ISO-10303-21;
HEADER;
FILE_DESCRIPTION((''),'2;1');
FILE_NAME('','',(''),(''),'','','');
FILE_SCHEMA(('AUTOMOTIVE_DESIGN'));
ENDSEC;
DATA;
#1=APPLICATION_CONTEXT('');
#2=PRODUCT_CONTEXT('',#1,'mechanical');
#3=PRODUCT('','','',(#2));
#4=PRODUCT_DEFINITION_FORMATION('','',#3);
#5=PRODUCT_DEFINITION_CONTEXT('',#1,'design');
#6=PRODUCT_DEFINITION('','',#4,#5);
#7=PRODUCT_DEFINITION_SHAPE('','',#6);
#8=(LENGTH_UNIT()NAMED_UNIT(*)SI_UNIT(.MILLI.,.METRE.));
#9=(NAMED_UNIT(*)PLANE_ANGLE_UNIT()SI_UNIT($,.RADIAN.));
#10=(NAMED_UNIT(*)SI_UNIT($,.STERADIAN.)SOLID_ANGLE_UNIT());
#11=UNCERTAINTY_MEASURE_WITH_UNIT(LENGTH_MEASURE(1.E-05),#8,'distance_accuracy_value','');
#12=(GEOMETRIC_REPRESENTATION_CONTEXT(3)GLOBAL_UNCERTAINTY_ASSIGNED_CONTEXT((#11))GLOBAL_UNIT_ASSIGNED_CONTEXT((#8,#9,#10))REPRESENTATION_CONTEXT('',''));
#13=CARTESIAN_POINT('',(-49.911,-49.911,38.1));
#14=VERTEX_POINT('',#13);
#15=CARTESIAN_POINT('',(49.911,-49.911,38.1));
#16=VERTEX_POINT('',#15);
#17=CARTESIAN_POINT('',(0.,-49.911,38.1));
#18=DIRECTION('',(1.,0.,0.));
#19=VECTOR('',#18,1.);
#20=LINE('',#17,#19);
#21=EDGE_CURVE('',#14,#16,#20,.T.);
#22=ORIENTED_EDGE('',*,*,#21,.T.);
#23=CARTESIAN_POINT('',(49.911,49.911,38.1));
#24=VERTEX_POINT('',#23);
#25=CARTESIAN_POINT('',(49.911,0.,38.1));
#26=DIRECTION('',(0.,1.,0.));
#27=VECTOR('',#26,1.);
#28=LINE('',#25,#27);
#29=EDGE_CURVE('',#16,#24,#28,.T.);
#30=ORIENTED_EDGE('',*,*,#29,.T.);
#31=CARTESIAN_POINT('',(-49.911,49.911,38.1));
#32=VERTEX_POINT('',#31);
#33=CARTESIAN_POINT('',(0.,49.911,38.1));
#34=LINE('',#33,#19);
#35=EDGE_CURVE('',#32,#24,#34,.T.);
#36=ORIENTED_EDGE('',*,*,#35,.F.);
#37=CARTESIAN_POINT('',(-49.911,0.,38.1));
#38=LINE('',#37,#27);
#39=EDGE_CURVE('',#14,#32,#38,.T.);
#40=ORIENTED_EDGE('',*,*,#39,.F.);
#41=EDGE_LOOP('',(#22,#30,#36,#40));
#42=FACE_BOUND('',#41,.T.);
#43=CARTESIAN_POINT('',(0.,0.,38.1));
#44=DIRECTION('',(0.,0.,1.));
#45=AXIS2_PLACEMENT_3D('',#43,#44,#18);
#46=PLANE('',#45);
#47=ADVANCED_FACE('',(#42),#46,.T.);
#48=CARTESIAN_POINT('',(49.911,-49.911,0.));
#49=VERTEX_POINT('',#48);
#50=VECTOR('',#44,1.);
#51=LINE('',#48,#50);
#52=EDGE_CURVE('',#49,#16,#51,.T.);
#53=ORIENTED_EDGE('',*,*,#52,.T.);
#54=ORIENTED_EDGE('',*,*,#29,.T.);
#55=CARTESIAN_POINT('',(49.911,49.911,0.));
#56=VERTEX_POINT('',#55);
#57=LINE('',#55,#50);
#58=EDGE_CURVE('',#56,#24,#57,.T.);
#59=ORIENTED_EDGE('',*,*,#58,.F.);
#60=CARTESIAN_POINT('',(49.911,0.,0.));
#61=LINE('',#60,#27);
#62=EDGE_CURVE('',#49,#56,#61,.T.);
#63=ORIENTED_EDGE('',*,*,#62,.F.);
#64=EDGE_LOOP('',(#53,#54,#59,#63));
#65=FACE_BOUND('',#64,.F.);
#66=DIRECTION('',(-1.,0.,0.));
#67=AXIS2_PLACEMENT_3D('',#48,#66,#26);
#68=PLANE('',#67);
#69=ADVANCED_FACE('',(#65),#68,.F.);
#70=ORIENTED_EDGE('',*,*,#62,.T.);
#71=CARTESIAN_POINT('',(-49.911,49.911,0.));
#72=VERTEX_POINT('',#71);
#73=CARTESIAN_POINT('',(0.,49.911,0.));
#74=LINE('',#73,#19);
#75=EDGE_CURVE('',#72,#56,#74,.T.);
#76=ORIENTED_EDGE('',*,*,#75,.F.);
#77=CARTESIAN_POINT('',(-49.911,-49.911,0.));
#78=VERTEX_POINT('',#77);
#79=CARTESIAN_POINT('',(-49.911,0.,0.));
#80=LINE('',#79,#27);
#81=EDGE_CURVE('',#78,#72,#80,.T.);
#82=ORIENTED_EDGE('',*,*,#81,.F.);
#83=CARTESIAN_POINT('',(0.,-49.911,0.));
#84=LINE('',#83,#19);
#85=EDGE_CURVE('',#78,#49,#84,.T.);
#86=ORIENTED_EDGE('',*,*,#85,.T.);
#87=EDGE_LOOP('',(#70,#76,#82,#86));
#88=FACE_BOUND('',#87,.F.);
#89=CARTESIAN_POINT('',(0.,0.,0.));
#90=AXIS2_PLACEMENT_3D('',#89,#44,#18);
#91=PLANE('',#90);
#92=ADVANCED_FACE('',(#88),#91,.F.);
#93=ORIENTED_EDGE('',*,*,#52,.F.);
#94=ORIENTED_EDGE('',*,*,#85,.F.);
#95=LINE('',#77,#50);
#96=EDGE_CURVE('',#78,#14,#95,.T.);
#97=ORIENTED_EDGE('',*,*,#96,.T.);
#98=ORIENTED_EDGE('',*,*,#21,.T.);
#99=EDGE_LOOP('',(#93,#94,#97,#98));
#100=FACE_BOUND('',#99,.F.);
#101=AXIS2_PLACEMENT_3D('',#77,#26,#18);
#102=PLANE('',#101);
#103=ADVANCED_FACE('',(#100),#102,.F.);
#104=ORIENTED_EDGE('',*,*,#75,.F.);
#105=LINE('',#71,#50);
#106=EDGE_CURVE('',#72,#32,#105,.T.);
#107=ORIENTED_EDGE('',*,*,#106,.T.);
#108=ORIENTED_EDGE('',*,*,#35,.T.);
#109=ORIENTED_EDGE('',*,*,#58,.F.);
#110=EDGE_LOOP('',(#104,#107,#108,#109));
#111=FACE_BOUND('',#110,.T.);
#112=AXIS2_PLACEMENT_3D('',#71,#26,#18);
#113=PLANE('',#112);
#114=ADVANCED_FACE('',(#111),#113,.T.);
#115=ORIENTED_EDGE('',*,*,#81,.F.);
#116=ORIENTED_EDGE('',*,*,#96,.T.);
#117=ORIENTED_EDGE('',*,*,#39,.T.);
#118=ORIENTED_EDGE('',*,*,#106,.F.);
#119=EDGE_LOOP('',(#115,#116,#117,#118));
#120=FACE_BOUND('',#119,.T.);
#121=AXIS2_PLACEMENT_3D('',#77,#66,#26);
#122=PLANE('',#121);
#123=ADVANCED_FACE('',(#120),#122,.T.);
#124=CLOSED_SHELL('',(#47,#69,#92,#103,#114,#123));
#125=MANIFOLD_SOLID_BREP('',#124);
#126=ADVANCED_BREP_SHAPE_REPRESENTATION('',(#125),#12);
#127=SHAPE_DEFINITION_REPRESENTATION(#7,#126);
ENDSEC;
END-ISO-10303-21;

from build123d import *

# Parameters (mm, degrees)
F0_W     = 99.822
F0_H     = 99.822
F1_DEPTH = 38.1


# Not quite as in the source:
# - a feature of the source that left no trace in its solid (it failed there, or was rolled back) is left out


with BuildPart() as f1:
    # F0 (on Top) → F1 (new body)
    with BuildSketch(Plane.XY):
        Rectangle(F0_W, F0_H)
    extrude(amount=F1_DEPTH)


solid = f1.part
